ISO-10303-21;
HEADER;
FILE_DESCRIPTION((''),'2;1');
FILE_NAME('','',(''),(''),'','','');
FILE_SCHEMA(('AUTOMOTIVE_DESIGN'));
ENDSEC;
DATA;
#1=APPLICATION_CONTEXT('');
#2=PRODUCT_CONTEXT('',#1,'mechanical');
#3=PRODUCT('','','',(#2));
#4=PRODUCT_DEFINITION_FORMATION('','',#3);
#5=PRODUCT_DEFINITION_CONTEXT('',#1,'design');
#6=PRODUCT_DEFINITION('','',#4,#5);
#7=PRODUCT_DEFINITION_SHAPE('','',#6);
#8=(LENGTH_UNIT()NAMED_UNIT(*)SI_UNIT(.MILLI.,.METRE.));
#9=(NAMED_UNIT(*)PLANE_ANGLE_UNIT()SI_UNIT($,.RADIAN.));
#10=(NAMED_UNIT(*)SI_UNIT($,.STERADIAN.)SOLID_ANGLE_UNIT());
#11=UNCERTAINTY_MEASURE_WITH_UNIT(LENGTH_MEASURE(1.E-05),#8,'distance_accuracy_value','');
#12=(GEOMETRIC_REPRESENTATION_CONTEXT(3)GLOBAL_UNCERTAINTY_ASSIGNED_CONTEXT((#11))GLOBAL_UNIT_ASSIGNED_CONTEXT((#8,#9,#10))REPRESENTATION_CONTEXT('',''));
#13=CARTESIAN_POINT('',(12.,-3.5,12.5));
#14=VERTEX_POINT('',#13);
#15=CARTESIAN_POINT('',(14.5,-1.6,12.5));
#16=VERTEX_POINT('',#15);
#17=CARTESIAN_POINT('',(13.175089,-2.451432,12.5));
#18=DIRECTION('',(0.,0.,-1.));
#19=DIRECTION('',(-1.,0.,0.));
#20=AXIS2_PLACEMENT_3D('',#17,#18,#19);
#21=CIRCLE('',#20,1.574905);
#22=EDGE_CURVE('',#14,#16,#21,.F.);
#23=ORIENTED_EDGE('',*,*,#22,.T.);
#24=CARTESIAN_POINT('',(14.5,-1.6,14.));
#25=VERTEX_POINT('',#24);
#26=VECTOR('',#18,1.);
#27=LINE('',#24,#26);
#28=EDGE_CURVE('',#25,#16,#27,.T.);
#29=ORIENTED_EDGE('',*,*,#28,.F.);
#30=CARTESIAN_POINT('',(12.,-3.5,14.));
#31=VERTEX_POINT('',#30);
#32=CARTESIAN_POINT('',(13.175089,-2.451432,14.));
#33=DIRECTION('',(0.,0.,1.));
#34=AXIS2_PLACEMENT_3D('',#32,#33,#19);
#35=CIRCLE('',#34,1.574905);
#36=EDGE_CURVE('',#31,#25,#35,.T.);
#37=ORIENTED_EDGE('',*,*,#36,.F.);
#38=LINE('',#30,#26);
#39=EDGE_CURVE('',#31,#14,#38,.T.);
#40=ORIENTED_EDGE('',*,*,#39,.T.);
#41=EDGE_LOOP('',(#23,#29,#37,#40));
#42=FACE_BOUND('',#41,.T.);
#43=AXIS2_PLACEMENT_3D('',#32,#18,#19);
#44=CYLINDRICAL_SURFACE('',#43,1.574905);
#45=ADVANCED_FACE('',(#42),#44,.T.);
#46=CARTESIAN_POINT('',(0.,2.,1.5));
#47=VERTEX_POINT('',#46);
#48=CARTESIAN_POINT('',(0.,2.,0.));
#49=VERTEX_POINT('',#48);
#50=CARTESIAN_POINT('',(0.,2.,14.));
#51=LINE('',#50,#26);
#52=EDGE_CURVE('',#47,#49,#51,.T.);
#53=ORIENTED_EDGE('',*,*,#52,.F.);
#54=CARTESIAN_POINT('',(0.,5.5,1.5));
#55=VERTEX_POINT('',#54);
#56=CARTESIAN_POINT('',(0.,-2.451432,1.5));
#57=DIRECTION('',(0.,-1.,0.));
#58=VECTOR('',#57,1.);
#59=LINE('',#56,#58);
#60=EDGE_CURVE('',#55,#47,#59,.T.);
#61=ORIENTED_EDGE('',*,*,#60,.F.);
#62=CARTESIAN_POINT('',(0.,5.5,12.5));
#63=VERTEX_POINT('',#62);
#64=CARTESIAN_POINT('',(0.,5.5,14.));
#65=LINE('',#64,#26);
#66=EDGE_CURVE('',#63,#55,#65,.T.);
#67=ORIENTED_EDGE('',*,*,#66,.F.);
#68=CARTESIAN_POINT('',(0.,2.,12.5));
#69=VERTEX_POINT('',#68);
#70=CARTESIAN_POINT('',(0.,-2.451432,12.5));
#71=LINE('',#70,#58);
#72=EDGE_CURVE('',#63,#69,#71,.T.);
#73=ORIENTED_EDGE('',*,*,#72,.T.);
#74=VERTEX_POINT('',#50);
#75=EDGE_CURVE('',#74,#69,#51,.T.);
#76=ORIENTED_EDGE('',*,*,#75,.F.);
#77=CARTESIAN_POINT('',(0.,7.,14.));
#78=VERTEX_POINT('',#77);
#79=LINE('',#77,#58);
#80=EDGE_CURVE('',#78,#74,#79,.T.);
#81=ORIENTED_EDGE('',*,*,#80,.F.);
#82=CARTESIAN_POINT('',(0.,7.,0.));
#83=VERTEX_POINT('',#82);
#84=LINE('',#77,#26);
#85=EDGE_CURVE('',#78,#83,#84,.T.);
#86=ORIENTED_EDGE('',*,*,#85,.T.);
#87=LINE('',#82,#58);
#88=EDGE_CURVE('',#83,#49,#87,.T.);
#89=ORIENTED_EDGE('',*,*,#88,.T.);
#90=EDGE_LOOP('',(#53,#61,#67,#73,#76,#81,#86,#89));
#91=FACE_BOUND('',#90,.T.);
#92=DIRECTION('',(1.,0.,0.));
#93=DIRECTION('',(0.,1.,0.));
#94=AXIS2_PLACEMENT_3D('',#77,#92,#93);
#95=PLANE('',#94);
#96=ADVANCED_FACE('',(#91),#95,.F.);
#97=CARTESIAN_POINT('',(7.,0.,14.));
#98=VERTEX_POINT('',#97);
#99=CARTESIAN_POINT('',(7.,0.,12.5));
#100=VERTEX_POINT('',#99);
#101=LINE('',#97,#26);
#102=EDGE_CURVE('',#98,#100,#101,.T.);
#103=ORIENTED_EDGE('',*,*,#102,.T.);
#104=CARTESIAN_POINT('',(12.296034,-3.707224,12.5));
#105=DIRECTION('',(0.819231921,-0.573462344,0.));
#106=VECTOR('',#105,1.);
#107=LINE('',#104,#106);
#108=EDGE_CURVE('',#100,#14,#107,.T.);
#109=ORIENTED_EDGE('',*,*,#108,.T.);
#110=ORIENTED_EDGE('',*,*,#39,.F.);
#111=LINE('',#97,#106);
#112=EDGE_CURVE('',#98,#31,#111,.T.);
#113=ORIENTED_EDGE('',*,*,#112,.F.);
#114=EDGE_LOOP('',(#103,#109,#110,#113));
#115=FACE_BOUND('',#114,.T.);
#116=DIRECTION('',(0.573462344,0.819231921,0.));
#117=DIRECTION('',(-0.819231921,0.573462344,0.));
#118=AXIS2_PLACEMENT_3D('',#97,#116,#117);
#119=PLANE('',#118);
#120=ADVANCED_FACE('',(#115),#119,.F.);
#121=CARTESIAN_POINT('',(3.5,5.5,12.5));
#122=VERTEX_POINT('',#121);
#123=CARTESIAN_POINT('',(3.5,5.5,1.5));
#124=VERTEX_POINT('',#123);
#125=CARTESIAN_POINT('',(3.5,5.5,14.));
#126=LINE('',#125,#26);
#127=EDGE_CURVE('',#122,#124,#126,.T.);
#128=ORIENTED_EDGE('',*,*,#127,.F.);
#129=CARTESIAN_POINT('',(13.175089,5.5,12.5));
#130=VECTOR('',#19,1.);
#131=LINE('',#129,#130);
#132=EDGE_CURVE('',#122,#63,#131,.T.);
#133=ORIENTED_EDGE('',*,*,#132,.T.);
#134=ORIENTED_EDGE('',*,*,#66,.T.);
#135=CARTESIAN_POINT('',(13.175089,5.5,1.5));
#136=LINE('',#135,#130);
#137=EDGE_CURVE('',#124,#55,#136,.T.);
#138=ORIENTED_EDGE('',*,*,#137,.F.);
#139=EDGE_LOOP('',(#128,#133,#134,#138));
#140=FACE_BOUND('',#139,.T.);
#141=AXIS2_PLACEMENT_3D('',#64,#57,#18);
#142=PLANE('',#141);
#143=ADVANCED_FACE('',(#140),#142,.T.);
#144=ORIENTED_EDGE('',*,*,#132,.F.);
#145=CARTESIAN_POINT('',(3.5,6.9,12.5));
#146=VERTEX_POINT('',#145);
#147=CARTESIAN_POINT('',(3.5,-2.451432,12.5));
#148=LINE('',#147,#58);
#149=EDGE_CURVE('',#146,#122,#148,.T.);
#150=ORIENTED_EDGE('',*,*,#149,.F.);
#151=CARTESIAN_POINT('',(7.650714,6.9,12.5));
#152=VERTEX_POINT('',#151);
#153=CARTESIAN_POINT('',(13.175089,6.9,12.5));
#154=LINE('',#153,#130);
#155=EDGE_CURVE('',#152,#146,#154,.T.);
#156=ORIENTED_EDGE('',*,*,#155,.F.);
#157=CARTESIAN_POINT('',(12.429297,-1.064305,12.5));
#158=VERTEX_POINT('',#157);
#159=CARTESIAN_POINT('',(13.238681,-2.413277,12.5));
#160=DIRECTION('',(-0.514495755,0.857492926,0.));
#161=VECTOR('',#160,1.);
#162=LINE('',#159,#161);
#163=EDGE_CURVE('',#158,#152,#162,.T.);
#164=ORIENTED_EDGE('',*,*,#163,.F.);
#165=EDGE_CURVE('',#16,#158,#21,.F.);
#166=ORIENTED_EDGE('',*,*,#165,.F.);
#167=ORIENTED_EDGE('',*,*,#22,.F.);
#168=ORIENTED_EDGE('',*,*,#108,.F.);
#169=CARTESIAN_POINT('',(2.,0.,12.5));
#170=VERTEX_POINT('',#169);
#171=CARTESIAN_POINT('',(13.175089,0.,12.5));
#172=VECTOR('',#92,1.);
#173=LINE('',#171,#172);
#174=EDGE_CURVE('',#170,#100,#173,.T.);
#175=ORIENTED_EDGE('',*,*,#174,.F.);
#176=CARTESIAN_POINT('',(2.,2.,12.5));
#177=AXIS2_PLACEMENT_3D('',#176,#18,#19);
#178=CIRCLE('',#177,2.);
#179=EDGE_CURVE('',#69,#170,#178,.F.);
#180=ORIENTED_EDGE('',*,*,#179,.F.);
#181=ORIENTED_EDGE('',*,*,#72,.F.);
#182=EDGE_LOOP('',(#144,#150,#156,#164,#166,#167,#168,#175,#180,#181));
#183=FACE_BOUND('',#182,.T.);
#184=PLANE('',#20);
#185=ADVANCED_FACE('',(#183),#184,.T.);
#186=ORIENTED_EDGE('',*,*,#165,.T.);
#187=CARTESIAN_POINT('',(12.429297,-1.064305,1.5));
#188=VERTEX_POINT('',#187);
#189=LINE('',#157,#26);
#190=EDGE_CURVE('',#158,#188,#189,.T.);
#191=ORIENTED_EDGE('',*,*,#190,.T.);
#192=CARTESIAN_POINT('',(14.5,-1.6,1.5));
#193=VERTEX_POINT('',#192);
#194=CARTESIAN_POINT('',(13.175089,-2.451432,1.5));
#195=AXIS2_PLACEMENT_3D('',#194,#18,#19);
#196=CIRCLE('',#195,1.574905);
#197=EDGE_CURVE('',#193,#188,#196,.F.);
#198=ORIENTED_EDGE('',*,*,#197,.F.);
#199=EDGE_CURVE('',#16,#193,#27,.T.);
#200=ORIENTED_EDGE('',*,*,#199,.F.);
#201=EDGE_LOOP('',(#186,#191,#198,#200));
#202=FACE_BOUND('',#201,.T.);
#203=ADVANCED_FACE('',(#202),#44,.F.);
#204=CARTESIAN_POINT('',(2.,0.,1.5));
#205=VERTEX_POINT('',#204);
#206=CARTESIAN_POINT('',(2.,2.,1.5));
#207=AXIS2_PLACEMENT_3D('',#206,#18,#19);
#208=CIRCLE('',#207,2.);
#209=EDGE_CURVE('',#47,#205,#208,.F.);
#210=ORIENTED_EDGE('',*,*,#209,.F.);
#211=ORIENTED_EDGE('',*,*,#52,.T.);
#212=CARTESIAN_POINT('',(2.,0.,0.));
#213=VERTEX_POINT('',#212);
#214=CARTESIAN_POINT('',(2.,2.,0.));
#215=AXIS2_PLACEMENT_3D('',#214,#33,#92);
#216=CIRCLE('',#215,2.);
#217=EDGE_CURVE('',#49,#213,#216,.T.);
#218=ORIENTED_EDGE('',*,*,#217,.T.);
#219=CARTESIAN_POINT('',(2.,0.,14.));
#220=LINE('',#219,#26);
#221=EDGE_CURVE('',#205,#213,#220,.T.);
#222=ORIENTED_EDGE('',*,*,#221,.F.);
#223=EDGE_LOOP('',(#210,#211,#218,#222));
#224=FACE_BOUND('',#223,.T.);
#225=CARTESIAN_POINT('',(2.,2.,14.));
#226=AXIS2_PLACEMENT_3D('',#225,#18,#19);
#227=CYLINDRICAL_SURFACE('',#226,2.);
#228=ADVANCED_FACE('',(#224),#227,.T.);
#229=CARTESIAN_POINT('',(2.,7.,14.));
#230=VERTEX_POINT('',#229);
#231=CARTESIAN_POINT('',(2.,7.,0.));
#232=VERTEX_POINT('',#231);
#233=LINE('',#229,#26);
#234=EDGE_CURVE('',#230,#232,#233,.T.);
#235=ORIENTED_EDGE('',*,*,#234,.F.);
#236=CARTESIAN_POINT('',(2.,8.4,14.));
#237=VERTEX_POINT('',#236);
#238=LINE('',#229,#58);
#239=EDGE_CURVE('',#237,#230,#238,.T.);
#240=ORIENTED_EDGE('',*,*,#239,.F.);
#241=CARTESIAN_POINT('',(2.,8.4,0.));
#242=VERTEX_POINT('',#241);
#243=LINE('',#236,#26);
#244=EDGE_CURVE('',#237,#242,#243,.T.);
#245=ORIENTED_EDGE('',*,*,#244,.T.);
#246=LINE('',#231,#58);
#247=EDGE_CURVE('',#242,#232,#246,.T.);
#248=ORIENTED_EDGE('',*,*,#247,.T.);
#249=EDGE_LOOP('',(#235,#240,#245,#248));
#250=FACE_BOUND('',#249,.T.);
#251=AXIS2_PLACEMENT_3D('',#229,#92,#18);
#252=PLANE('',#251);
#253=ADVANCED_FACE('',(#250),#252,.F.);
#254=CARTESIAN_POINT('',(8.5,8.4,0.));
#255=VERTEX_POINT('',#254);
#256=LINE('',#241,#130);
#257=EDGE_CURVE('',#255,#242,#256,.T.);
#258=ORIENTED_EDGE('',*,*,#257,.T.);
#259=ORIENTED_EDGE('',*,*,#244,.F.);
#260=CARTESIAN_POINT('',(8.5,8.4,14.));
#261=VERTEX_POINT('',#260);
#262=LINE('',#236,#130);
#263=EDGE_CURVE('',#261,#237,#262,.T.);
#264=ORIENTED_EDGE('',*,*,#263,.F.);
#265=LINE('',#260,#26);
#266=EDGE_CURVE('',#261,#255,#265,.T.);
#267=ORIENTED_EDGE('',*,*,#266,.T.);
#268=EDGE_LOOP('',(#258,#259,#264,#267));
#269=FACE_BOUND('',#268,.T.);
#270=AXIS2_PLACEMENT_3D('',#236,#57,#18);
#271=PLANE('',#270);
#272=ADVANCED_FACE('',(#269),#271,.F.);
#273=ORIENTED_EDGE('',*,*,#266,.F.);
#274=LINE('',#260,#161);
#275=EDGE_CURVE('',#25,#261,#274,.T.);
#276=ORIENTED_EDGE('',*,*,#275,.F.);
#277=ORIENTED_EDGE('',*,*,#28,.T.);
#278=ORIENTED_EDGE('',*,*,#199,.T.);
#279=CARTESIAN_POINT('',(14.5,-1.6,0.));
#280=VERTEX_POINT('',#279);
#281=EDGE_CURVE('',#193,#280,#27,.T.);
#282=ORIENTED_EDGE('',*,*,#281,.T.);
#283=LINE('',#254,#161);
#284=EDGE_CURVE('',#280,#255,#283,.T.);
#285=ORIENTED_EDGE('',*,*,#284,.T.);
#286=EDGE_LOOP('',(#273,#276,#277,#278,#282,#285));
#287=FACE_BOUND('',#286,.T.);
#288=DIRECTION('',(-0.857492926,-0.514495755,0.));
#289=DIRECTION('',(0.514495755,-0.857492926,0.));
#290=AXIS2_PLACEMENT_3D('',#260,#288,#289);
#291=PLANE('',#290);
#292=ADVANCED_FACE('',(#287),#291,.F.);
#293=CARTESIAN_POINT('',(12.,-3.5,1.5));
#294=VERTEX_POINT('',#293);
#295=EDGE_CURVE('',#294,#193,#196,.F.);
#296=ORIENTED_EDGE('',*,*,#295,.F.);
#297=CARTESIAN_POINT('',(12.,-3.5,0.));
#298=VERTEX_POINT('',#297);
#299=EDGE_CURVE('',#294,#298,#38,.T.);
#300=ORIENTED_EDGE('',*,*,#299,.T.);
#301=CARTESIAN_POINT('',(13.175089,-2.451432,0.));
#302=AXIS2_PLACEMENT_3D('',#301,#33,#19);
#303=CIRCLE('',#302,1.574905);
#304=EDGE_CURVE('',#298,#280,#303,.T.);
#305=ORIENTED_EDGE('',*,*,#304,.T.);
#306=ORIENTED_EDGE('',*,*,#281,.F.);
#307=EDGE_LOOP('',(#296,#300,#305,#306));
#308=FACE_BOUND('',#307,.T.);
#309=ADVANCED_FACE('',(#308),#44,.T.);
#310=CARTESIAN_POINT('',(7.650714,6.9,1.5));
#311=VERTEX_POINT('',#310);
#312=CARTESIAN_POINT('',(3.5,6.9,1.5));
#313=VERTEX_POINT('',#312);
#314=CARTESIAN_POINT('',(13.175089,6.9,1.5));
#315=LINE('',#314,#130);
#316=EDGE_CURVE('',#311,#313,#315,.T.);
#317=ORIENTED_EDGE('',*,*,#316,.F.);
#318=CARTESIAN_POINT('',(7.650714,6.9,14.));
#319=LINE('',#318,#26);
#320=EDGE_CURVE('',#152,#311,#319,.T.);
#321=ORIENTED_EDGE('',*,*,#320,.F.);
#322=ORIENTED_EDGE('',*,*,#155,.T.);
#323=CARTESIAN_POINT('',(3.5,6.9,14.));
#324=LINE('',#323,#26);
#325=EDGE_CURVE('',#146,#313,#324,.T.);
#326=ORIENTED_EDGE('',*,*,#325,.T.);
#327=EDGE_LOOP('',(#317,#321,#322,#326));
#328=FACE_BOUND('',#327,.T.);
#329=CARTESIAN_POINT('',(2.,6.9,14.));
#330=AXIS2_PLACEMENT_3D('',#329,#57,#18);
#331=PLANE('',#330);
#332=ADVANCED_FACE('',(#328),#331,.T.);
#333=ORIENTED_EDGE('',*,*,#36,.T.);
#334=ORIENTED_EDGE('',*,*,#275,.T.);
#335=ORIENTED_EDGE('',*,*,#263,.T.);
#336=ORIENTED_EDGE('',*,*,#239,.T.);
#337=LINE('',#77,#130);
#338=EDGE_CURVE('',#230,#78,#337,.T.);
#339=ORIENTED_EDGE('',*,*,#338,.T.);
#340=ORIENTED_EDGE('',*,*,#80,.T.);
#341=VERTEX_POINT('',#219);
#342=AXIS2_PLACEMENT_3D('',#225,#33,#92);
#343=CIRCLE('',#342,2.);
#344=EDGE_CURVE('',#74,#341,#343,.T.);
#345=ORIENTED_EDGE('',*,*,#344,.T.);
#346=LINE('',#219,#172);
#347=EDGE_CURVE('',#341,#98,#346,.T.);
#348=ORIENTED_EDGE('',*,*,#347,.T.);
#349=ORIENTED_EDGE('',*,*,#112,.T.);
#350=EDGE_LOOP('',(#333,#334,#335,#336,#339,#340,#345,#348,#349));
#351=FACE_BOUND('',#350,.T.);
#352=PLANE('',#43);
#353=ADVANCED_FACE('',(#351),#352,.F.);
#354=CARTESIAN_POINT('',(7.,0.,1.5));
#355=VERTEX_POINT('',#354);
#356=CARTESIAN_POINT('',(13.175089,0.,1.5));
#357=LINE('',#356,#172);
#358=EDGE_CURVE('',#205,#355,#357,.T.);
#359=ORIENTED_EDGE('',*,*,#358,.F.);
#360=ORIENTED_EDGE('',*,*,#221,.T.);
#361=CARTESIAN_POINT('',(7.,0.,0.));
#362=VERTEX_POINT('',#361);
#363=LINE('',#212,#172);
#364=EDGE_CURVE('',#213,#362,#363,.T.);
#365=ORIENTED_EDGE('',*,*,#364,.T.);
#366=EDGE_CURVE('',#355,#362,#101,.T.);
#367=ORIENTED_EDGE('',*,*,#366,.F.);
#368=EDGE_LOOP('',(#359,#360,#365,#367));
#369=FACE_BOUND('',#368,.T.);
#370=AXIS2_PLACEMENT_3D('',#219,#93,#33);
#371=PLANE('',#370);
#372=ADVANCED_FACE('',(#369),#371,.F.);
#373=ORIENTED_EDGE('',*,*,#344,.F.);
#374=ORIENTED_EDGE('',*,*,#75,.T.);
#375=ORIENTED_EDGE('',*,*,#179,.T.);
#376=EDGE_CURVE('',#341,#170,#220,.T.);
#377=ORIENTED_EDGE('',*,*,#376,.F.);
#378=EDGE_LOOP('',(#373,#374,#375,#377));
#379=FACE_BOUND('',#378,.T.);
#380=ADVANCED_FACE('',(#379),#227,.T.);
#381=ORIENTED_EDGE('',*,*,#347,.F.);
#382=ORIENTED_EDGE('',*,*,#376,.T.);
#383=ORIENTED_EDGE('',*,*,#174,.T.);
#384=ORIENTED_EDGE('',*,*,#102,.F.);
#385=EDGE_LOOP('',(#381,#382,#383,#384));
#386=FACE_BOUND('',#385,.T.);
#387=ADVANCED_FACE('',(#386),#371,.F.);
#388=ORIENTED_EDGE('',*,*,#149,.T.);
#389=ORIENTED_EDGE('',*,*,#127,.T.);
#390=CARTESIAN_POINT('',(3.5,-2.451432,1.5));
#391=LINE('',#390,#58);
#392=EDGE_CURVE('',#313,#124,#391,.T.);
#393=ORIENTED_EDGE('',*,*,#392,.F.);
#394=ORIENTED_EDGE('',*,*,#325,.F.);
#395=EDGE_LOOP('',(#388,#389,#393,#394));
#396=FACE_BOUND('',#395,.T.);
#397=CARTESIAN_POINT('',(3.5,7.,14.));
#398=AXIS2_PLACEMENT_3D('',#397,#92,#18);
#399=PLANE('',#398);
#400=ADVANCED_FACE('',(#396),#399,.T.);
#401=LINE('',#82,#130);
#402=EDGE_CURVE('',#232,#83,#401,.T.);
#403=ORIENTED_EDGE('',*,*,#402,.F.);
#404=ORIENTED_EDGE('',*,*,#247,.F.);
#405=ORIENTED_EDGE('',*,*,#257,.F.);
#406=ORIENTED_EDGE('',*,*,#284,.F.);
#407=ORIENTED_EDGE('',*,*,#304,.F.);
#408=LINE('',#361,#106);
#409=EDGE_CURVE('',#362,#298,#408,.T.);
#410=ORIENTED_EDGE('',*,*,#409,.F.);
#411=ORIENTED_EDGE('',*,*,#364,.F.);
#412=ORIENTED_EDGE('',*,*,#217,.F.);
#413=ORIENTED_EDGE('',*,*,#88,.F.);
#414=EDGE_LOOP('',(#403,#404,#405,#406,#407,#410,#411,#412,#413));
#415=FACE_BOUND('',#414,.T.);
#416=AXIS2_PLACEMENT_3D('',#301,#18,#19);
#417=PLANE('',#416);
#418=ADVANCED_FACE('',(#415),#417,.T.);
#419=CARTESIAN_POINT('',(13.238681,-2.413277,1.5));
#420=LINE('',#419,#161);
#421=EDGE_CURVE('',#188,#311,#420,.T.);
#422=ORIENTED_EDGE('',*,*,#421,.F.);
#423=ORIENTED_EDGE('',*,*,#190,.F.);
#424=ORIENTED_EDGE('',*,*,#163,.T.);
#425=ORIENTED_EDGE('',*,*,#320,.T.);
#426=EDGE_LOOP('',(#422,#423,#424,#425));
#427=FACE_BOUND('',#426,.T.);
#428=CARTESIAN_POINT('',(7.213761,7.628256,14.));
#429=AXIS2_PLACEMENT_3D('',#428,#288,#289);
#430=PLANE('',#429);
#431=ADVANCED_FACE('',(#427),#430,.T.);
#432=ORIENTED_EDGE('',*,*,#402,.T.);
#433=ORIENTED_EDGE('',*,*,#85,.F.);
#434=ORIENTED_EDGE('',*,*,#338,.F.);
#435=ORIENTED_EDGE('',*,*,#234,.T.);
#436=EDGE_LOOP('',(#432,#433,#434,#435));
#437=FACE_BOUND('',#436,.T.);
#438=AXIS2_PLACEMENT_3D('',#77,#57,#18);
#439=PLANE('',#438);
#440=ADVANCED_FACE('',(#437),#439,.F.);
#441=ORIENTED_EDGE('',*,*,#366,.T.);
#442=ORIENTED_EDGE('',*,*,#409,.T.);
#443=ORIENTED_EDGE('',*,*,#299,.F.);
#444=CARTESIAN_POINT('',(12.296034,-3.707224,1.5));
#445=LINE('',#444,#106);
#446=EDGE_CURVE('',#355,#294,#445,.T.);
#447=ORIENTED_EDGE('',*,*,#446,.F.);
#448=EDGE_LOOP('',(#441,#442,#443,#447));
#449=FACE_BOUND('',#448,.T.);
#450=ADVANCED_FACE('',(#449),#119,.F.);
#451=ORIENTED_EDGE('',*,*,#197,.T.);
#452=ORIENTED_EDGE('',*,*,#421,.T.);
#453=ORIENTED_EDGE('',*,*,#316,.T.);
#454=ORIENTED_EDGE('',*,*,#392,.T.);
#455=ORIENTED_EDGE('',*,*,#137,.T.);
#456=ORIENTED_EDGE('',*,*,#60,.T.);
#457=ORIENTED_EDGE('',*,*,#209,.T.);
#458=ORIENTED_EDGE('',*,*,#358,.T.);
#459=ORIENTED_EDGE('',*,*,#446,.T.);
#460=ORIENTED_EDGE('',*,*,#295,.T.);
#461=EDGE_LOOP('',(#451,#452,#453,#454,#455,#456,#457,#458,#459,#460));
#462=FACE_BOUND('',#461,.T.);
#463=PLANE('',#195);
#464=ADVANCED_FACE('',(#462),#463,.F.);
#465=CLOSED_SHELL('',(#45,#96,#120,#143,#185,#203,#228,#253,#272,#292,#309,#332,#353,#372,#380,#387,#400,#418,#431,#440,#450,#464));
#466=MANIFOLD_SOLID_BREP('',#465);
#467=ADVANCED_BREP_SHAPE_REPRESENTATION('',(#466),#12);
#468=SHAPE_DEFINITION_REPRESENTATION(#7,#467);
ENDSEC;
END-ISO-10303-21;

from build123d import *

# Parameters (mm, degrees)
ESTRUSIONE_ESTRUSIONE1_DEPTH = 14
SVUOTA2_START                = 1.5
SVUOTA2_DEPTH                = 11


# Read off the part's stored shape, not the designer's step: Svuota2
with BuildPart() as part:
    # Schizzo1 → Estrusione-Estrusione1 (new body)
    with BuildSketch(Plane.XY):
        with BuildLine():
            Line((0, 7), (0, 2))
            ThreePointArc((0, 2), (0.585786438, 0.585786438), (2, 0))
            Line((2, 0), (7, 0))
            Line((7, 0), (12, -3.5))
            ThreePointArc((12, -3.5), (14.128037504, -3.705312505), (14.5, -1.6))
            Line((14.5, -1.6), (8.5, 8.4))
            Line((8.5, 8.4), (2, 8.4))
            Line((2, 8.4), (2, 7))
            Line((2, 7), (0, 7))
        make_face()
    extrude(amount=ESTRUSIONE_ESTRUSIONE1_DEPTH)

    # Svuota2 outline → Svuota2 (cut)
    with BuildSketch(Plane.XY.offset(SVUOTA2_START)):
        with BuildLine():
            Line((3.5, 5.5), (0, 5.5))
            Line((0, 5.5), (0, 2))
            ThreePointArc((0, 2), (0.585786438, 0.585786438), (2, 0))
            Line((2, 0), (7, 0))
            Line((7, 0), (12, -3.5))
            ThreePointArc((12, -3.5), (14.128037504, -3.705312505), (14.5, -1.6))
            ThreePointArc((14.5, -1.6), (13.569534227, -0.926722507), (12.429297297, -1.064304775))
            Line((12.429297297, -1.064304775), (7.650714432, 6.9))
            Line((7.650714432, 6.9), (3.5, 6.9))
            Line((3.5, 6.9), (3.5, 5.5))
        make_face()
    extrude(amount=SVUOTA2_DEPTH, mode=Mode.SUBTRACT)


solid = part.part
